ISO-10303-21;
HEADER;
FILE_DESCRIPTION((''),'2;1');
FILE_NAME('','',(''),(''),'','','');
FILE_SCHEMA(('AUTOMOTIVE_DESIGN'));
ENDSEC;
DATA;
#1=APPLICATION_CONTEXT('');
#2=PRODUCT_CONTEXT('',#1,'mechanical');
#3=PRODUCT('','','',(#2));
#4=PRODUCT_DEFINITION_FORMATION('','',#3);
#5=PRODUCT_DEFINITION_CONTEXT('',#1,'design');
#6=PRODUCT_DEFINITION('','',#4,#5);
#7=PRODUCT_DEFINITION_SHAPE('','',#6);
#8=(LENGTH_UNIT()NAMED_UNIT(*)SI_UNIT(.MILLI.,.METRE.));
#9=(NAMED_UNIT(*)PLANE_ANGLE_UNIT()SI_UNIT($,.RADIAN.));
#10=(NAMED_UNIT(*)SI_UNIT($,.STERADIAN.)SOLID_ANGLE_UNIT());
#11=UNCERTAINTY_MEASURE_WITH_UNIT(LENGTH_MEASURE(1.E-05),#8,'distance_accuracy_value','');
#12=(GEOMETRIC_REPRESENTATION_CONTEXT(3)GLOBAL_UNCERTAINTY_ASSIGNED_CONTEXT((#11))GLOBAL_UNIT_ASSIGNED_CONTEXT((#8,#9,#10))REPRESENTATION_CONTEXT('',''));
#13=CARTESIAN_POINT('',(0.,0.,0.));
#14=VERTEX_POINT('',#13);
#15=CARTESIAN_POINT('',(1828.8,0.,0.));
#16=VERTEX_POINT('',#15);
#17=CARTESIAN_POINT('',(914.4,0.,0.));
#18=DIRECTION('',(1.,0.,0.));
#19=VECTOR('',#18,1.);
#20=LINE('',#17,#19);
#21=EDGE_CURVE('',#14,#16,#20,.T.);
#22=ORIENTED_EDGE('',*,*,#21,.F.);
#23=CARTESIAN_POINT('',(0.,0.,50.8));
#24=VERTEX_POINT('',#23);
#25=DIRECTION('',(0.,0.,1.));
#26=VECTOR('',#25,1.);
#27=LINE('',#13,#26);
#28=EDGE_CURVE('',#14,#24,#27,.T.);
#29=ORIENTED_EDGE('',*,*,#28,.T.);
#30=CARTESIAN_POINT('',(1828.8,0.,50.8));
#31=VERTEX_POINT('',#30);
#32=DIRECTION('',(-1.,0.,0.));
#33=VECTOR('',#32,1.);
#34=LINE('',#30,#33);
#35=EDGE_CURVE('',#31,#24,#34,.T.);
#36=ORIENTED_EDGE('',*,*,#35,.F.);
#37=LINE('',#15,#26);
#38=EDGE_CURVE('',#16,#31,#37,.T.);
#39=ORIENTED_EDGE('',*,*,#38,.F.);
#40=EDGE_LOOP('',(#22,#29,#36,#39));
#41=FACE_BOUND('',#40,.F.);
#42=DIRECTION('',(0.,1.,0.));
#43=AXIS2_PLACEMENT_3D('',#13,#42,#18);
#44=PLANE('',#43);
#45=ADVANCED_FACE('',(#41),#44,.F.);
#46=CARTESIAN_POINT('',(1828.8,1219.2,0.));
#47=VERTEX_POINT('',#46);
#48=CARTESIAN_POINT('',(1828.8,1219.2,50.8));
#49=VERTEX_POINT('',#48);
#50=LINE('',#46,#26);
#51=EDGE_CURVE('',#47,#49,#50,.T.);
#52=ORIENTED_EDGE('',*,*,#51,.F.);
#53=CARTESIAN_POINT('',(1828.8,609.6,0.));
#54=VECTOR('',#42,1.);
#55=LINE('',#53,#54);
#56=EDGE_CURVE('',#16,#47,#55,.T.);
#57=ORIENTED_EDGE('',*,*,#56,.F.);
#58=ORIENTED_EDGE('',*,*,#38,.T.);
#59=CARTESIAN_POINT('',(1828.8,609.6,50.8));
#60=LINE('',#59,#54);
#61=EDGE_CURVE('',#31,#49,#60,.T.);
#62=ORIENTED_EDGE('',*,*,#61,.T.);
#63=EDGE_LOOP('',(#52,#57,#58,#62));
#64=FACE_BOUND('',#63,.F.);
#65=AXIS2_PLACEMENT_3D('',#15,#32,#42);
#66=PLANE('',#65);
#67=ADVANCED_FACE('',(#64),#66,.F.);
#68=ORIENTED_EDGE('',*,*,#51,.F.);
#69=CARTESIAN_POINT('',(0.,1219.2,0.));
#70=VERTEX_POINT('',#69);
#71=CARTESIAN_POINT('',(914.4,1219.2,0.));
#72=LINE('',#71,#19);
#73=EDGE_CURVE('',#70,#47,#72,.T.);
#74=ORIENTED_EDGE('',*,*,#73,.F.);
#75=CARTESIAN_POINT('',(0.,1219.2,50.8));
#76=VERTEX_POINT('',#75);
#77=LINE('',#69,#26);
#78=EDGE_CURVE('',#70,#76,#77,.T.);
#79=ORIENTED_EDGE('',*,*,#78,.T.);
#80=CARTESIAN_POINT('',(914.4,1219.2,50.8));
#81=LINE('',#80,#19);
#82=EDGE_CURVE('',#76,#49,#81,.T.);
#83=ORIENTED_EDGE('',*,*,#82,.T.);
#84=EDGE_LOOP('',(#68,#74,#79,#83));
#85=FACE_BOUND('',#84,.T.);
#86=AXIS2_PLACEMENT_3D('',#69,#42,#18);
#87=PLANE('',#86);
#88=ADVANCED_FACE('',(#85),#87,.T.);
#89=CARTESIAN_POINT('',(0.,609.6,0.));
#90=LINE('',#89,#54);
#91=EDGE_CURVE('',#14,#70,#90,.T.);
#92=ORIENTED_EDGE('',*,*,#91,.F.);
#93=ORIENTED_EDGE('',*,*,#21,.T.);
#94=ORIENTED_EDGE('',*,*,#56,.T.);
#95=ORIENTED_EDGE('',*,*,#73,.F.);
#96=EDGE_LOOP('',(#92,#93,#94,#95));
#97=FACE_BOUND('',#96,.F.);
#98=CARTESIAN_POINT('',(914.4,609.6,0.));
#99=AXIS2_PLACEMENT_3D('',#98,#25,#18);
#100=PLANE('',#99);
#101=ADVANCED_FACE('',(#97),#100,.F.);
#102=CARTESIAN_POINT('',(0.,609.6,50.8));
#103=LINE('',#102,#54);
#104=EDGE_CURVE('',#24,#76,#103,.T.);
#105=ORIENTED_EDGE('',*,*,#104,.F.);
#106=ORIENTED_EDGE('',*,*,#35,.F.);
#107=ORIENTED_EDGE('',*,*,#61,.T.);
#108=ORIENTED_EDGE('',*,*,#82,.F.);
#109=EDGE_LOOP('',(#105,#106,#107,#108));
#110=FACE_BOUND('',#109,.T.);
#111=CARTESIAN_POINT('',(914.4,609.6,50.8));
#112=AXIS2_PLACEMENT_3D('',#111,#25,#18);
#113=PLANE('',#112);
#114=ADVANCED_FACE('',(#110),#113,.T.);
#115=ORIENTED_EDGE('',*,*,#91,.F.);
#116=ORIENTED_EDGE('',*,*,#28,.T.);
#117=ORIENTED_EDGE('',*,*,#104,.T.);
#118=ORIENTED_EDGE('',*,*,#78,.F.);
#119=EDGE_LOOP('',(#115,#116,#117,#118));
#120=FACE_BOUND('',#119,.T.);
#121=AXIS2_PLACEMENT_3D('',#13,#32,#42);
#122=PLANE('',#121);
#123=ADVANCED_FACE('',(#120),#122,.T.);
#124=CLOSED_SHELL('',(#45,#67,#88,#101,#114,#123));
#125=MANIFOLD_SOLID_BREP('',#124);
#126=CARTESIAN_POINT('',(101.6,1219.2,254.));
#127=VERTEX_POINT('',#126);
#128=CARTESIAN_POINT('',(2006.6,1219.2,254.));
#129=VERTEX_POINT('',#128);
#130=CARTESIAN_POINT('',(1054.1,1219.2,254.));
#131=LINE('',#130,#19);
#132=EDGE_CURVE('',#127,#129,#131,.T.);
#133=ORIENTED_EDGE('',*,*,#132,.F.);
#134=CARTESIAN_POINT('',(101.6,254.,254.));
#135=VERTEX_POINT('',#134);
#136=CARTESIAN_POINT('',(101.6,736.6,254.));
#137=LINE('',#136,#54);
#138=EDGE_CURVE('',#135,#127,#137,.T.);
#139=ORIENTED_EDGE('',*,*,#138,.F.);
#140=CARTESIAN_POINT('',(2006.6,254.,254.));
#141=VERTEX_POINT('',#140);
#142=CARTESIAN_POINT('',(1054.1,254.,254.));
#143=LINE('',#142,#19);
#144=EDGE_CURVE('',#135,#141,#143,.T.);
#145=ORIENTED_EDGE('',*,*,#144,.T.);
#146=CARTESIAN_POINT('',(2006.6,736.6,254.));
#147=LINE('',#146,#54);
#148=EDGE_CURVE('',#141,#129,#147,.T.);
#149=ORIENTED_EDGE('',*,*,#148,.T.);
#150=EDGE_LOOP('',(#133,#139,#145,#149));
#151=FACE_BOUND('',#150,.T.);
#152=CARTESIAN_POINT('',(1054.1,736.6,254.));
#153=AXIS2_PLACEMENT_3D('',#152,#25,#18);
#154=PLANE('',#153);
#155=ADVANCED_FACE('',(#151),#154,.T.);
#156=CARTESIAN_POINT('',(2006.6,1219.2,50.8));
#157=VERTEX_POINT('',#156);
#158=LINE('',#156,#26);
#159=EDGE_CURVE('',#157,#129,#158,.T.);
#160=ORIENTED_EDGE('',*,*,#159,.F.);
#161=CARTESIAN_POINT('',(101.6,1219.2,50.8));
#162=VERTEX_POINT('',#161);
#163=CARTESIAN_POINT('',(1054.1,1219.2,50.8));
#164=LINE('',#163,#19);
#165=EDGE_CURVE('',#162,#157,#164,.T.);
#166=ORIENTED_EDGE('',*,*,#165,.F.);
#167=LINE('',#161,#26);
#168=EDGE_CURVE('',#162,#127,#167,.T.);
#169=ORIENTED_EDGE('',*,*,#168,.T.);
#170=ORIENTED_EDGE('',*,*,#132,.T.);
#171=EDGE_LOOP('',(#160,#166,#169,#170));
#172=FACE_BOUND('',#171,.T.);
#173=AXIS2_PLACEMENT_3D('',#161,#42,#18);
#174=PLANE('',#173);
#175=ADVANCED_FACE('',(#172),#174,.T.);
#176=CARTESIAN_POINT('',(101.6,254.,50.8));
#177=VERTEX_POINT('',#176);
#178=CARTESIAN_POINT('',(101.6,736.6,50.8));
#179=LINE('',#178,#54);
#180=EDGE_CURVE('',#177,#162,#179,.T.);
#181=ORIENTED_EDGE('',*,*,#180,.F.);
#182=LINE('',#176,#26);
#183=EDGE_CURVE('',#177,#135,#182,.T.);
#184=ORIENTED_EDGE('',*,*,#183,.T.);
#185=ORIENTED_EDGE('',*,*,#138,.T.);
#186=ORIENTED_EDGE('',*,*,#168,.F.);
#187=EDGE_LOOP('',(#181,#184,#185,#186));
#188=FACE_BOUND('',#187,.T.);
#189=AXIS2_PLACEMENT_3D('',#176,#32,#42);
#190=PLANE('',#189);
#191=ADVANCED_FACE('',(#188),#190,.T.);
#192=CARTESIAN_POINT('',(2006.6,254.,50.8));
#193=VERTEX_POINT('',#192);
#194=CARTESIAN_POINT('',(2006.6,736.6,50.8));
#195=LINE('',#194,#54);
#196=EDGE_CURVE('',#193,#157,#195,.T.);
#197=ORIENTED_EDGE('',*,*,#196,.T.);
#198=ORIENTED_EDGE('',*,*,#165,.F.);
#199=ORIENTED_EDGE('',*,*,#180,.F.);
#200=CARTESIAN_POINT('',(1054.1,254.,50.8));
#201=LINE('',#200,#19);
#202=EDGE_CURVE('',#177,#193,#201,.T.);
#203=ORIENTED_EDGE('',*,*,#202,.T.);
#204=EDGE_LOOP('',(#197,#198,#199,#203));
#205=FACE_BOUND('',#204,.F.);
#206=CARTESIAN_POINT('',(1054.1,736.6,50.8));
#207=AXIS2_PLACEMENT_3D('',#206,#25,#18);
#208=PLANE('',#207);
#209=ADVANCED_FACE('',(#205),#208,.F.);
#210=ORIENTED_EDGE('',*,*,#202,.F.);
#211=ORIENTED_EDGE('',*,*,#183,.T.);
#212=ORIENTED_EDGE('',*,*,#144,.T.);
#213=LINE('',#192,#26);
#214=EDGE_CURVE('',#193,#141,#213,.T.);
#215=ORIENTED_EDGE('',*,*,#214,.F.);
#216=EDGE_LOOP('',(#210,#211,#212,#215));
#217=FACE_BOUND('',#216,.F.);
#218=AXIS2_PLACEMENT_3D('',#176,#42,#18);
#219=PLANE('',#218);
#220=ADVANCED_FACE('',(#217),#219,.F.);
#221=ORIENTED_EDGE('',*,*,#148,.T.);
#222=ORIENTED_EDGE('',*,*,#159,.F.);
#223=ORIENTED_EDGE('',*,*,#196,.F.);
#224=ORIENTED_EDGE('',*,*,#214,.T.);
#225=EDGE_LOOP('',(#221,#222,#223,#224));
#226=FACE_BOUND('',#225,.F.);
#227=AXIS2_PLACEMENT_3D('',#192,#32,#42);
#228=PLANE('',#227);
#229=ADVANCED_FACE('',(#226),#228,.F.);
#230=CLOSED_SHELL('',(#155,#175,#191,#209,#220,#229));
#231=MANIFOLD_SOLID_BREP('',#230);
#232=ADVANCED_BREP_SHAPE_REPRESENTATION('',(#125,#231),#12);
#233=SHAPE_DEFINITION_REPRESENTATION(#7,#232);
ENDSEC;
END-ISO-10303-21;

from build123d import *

# Parameters (mm, degrees)
F0_W      = 1828.8
F0_H      = 1219.2
F1_DEPTH  = 50.8
F6_DEPTH  = 25.4
F8_DEPTH  = 25.4
F9_W      = 1905
F9_H      = 965.2
F10_DEPTH = 203.2


# Not quite as in the source:
# - a feature of the source that left no trace in its solid (it failed there, or was rolled back) is left out


with BuildPart() as f1:
    # F0 (on Top) → F1 (new body)
    with BuildSketch(Plane.XY):
        with Locations((914.4, 609.6)):
            Rectangle(F0_W, F0_H)
    extrude(amount=F1_DEPTH)

    # F5 (on face) → F6 (cut)
    with BuildSketch(Plane.XZ):
        with BuildLine():
            Line((1254.4775691986, 50.8), (1711.6775691986, 50.8))
            ThreePointArc((1711.6775691986, 50.8), (1783.5196181672, 80.5579510314), (1813.2775691986, 152.4))
            Line((1813.2775691986, 152.4), (1813.2775691986, 863.6))
            ThreePointArc((1813.2775691986, 863.6), (1783.5196181672, 935.4420489686), (1711.6775691986, 965.2))
            Line((1711.6775691986, 965.2), (1254.4775691986, 965.2))
            ThreePointArc((1254.4775691986, 965.2), (1182.6355202301, 935.4420489686), (1152.8775691986, 863.6))
            Line((1152.8775691986, 863.6), (1152.8775691986, 152.4))
            ThreePointArc((1152.8775691986, 152.4), (1182.6355202301, 80.5579510314), (1254.4775691986, 50.8))
        make_face()
    extrude(amount=-F6_DEPTH, mode=Mode.SUBTRACT)

    # F7 (on face) → F8 (cut)
    with BuildSketch(Plane(origin=(0, 1219.2, 0), x_dir=(-1, 0, 0), z_dir=(0, 1, 0))):
        with BuildLine():
            Line((-1854.2, 736.6), (-2133.6, 736.6))
            ThreePointArc((-2133.6, 736.6), (-2169.5210244843, 721.7210244843), (-2184.4, 685.8))
            Line((-2184.4, 685.8), (-2184.4, 558.8))
            ThreePointArc((-2184.4, 558.8), (-2169.5210244843, 522.8789755157), (-2133.6, 508))
            Line((-2133.6, 508), (-1854.2, 508))
            ThreePointArc((-1854.2, 508), (-1818.2789755157, 522.8789755157), (-1803.4, 558.8))
            Line((-1803.4, 558.8), (-1803.4, 685.8))
            ThreePointArc((-1803.4, 685.8), (-1818.2789755157, 721.7210244843), (-1854.2, 736.6))
        make_face()
    extrude(amount=-F8_DEPTH, mode=Mode.SUBTRACT)


with BuildPart() as f10:
    # F9 (on face) → F10 (new body)
    with BuildSketch(Plane.XY.offset(50.8)):
        with Locations((1054.1, 736.6)):
            Rectangle(F9_W, F9_H)
    extrude(amount=F10_DEPTH)


solid = Compound([f1.part, f10.part])
